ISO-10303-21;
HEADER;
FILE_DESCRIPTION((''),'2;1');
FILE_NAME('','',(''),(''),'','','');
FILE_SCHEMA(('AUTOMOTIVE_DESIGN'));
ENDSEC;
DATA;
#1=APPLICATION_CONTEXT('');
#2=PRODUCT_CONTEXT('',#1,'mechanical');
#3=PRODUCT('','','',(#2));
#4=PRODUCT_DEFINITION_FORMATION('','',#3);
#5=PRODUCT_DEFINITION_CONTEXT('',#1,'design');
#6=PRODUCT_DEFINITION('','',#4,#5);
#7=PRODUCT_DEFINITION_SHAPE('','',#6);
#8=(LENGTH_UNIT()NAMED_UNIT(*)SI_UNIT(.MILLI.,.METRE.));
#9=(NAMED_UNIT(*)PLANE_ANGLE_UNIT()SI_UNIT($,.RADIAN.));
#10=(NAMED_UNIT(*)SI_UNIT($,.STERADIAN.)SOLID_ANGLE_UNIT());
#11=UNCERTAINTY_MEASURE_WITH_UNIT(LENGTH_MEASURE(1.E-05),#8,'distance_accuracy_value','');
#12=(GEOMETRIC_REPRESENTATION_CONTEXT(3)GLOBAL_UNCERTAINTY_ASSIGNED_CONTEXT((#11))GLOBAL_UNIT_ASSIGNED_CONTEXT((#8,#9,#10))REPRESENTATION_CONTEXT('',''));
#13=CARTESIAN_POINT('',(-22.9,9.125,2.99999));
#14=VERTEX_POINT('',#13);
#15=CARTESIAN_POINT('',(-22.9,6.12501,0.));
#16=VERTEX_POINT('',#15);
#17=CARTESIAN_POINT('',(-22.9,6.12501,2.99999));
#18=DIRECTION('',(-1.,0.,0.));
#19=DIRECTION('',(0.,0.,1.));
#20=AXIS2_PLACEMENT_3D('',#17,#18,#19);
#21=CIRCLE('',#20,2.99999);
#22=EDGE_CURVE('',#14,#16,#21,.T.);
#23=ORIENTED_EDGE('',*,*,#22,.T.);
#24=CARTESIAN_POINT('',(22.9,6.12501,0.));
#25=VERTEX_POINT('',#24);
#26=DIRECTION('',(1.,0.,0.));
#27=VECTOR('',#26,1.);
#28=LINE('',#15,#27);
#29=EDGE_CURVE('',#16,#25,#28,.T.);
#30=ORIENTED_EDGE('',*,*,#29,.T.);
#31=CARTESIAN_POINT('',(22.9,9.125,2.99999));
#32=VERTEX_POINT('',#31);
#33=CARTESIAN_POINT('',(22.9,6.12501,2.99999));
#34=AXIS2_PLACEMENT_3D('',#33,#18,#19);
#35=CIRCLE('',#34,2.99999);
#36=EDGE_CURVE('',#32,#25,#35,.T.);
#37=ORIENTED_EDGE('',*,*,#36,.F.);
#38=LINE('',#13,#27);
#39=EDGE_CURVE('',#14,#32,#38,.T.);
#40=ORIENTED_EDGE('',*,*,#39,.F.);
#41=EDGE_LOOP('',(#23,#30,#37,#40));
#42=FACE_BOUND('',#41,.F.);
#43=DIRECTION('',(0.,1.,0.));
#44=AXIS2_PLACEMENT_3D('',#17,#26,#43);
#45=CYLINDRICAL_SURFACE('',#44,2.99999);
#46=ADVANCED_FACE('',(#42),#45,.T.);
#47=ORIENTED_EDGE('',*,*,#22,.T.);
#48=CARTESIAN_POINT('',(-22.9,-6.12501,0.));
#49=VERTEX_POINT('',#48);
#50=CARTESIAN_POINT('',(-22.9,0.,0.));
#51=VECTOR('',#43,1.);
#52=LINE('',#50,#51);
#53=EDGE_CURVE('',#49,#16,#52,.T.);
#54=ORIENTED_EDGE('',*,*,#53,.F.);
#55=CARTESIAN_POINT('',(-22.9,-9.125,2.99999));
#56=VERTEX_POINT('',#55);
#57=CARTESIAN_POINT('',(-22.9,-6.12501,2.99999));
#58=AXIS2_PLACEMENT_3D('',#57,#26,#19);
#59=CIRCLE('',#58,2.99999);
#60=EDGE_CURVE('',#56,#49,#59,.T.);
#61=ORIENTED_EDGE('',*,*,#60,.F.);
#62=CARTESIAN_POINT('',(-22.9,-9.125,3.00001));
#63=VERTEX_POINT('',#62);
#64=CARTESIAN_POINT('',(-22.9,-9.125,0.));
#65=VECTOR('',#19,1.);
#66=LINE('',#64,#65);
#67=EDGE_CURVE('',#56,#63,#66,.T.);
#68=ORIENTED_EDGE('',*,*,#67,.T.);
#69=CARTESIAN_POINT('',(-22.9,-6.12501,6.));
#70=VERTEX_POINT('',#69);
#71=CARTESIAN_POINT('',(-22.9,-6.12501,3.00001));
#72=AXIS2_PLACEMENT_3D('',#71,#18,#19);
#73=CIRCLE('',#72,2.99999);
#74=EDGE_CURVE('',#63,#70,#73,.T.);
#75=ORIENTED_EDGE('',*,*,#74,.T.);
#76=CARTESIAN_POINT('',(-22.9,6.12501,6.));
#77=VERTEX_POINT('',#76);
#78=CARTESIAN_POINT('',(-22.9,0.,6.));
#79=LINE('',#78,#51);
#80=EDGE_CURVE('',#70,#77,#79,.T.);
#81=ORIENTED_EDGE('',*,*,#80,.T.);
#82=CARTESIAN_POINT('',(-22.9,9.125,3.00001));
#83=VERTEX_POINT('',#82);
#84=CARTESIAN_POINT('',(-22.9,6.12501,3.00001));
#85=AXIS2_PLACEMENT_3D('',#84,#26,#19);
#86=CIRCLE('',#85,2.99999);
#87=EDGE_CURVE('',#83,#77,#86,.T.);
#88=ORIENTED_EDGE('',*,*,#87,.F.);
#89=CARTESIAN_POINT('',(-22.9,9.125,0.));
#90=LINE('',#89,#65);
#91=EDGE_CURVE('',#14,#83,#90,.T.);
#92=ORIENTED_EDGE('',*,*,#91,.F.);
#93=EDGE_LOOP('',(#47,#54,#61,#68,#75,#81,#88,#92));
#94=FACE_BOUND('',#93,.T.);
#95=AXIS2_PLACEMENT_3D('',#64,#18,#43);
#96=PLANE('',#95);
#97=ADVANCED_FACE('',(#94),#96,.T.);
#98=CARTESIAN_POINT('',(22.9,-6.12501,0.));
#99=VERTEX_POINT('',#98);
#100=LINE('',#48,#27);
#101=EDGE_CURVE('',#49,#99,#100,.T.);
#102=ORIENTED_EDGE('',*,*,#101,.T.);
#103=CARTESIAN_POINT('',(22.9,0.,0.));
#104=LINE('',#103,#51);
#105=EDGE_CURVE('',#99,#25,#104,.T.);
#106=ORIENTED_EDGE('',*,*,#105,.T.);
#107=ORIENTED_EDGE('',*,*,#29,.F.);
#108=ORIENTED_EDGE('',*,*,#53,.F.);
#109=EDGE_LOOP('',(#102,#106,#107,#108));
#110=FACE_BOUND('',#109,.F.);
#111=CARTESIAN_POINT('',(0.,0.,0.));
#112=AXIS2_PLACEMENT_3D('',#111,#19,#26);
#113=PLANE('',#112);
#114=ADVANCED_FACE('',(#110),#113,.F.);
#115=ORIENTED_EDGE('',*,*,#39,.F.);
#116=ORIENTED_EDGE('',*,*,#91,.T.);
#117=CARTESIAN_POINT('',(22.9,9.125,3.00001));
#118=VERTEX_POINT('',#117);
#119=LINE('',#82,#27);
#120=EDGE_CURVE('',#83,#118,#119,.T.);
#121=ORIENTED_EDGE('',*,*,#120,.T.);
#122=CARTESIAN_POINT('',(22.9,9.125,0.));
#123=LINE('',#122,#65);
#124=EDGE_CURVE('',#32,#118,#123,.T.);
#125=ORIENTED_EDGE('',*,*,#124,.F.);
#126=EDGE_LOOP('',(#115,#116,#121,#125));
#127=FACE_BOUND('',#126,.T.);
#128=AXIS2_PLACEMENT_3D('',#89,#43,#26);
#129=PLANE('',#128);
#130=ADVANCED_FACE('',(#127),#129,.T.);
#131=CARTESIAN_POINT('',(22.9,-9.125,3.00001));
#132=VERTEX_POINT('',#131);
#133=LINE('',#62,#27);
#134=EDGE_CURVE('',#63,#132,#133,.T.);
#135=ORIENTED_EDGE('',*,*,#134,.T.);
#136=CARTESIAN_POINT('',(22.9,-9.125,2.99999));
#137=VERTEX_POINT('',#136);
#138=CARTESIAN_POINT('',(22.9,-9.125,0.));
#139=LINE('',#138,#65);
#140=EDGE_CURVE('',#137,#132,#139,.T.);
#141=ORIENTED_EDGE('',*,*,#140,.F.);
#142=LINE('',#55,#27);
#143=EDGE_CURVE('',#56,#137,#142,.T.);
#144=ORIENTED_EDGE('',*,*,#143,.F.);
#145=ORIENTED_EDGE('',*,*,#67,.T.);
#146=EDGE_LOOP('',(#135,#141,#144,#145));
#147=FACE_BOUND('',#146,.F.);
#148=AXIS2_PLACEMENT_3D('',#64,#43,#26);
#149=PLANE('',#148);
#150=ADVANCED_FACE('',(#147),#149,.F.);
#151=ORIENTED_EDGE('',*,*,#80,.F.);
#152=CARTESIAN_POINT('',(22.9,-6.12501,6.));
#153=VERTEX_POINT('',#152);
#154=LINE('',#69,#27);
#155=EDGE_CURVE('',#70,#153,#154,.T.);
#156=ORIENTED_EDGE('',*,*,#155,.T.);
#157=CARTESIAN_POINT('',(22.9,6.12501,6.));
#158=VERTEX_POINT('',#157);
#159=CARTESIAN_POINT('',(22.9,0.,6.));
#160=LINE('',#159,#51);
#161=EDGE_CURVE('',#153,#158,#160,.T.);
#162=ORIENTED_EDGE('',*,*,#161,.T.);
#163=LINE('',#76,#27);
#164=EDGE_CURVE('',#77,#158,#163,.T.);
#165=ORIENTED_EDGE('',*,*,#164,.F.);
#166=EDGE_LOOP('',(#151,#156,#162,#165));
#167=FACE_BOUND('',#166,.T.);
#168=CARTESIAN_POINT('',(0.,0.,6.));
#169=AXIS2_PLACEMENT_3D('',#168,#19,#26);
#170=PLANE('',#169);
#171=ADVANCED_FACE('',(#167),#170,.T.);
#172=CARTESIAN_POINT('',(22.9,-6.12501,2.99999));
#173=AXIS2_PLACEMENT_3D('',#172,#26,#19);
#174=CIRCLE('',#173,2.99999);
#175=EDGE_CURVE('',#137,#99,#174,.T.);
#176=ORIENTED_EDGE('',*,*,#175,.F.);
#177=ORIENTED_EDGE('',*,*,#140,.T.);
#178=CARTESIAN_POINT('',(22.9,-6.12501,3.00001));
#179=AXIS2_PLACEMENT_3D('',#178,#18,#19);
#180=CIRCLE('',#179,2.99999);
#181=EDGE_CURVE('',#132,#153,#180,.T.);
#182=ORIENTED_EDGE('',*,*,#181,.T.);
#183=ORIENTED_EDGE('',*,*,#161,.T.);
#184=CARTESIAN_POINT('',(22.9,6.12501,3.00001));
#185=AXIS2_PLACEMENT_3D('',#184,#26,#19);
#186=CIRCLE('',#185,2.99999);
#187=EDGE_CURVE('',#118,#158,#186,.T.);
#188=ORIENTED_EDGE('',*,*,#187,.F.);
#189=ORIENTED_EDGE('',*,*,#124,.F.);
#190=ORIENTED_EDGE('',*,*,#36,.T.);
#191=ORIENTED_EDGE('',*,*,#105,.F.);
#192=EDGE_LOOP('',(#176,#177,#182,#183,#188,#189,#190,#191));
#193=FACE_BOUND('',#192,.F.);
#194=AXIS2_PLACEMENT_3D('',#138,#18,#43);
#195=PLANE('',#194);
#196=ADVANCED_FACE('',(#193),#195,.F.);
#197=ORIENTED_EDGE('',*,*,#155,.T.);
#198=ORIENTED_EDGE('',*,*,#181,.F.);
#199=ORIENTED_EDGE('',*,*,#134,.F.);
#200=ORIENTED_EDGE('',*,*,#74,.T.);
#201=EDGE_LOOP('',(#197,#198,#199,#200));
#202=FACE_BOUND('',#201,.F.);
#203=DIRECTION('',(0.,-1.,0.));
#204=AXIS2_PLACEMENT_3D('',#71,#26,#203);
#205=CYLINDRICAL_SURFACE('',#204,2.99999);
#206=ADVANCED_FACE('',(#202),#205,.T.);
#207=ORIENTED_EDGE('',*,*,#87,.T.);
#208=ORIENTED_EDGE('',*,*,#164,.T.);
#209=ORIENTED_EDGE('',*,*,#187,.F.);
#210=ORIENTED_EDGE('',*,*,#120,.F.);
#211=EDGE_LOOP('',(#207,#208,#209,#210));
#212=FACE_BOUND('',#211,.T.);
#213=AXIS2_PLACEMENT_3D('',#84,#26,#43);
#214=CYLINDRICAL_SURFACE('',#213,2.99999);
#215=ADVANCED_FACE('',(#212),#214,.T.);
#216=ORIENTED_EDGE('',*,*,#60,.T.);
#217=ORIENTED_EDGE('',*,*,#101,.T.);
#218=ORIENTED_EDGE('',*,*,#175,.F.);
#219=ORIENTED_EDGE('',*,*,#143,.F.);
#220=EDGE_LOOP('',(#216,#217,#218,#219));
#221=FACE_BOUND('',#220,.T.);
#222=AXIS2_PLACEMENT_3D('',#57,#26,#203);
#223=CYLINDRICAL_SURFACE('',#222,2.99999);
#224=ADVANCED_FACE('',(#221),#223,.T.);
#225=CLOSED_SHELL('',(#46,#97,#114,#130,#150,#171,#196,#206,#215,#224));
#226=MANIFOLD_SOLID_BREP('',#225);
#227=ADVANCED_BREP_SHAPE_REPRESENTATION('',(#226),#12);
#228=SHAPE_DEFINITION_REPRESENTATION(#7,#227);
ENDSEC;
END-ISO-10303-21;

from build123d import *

# Parameters (mm, degrees)
F0_W     = 45.8
F0_H     = 18.25
F1_DEPTH = 6
F2_R     = 2.99999


# Not quite as in the source:
# - a fillet or chamfer is up to 0.001 mm smaller than in the source, because OpenCascade refuses the exact size


with BuildPart() as f1:
    # F0 (on Top) → F1 (new body)
    with BuildSketch(Plane.XY):
        Rectangle(F0_W, F0_H)
    extrude(amount=F1_DEPTH)

    # F2 (radius 3 in the source; OpenCascade refuses exactly that, so slightly less here)
    f2_edges = [f1.edges().sort_by_distance(p)[0] for p in [
        (0, -9.125, 6),
        (0, -9.125, 0),
        (0, 9.125, 6),
        (0, 9.125, 0),
    ]]
    fillet(f2_edges, radius=F2_R)


solid = f1.part
